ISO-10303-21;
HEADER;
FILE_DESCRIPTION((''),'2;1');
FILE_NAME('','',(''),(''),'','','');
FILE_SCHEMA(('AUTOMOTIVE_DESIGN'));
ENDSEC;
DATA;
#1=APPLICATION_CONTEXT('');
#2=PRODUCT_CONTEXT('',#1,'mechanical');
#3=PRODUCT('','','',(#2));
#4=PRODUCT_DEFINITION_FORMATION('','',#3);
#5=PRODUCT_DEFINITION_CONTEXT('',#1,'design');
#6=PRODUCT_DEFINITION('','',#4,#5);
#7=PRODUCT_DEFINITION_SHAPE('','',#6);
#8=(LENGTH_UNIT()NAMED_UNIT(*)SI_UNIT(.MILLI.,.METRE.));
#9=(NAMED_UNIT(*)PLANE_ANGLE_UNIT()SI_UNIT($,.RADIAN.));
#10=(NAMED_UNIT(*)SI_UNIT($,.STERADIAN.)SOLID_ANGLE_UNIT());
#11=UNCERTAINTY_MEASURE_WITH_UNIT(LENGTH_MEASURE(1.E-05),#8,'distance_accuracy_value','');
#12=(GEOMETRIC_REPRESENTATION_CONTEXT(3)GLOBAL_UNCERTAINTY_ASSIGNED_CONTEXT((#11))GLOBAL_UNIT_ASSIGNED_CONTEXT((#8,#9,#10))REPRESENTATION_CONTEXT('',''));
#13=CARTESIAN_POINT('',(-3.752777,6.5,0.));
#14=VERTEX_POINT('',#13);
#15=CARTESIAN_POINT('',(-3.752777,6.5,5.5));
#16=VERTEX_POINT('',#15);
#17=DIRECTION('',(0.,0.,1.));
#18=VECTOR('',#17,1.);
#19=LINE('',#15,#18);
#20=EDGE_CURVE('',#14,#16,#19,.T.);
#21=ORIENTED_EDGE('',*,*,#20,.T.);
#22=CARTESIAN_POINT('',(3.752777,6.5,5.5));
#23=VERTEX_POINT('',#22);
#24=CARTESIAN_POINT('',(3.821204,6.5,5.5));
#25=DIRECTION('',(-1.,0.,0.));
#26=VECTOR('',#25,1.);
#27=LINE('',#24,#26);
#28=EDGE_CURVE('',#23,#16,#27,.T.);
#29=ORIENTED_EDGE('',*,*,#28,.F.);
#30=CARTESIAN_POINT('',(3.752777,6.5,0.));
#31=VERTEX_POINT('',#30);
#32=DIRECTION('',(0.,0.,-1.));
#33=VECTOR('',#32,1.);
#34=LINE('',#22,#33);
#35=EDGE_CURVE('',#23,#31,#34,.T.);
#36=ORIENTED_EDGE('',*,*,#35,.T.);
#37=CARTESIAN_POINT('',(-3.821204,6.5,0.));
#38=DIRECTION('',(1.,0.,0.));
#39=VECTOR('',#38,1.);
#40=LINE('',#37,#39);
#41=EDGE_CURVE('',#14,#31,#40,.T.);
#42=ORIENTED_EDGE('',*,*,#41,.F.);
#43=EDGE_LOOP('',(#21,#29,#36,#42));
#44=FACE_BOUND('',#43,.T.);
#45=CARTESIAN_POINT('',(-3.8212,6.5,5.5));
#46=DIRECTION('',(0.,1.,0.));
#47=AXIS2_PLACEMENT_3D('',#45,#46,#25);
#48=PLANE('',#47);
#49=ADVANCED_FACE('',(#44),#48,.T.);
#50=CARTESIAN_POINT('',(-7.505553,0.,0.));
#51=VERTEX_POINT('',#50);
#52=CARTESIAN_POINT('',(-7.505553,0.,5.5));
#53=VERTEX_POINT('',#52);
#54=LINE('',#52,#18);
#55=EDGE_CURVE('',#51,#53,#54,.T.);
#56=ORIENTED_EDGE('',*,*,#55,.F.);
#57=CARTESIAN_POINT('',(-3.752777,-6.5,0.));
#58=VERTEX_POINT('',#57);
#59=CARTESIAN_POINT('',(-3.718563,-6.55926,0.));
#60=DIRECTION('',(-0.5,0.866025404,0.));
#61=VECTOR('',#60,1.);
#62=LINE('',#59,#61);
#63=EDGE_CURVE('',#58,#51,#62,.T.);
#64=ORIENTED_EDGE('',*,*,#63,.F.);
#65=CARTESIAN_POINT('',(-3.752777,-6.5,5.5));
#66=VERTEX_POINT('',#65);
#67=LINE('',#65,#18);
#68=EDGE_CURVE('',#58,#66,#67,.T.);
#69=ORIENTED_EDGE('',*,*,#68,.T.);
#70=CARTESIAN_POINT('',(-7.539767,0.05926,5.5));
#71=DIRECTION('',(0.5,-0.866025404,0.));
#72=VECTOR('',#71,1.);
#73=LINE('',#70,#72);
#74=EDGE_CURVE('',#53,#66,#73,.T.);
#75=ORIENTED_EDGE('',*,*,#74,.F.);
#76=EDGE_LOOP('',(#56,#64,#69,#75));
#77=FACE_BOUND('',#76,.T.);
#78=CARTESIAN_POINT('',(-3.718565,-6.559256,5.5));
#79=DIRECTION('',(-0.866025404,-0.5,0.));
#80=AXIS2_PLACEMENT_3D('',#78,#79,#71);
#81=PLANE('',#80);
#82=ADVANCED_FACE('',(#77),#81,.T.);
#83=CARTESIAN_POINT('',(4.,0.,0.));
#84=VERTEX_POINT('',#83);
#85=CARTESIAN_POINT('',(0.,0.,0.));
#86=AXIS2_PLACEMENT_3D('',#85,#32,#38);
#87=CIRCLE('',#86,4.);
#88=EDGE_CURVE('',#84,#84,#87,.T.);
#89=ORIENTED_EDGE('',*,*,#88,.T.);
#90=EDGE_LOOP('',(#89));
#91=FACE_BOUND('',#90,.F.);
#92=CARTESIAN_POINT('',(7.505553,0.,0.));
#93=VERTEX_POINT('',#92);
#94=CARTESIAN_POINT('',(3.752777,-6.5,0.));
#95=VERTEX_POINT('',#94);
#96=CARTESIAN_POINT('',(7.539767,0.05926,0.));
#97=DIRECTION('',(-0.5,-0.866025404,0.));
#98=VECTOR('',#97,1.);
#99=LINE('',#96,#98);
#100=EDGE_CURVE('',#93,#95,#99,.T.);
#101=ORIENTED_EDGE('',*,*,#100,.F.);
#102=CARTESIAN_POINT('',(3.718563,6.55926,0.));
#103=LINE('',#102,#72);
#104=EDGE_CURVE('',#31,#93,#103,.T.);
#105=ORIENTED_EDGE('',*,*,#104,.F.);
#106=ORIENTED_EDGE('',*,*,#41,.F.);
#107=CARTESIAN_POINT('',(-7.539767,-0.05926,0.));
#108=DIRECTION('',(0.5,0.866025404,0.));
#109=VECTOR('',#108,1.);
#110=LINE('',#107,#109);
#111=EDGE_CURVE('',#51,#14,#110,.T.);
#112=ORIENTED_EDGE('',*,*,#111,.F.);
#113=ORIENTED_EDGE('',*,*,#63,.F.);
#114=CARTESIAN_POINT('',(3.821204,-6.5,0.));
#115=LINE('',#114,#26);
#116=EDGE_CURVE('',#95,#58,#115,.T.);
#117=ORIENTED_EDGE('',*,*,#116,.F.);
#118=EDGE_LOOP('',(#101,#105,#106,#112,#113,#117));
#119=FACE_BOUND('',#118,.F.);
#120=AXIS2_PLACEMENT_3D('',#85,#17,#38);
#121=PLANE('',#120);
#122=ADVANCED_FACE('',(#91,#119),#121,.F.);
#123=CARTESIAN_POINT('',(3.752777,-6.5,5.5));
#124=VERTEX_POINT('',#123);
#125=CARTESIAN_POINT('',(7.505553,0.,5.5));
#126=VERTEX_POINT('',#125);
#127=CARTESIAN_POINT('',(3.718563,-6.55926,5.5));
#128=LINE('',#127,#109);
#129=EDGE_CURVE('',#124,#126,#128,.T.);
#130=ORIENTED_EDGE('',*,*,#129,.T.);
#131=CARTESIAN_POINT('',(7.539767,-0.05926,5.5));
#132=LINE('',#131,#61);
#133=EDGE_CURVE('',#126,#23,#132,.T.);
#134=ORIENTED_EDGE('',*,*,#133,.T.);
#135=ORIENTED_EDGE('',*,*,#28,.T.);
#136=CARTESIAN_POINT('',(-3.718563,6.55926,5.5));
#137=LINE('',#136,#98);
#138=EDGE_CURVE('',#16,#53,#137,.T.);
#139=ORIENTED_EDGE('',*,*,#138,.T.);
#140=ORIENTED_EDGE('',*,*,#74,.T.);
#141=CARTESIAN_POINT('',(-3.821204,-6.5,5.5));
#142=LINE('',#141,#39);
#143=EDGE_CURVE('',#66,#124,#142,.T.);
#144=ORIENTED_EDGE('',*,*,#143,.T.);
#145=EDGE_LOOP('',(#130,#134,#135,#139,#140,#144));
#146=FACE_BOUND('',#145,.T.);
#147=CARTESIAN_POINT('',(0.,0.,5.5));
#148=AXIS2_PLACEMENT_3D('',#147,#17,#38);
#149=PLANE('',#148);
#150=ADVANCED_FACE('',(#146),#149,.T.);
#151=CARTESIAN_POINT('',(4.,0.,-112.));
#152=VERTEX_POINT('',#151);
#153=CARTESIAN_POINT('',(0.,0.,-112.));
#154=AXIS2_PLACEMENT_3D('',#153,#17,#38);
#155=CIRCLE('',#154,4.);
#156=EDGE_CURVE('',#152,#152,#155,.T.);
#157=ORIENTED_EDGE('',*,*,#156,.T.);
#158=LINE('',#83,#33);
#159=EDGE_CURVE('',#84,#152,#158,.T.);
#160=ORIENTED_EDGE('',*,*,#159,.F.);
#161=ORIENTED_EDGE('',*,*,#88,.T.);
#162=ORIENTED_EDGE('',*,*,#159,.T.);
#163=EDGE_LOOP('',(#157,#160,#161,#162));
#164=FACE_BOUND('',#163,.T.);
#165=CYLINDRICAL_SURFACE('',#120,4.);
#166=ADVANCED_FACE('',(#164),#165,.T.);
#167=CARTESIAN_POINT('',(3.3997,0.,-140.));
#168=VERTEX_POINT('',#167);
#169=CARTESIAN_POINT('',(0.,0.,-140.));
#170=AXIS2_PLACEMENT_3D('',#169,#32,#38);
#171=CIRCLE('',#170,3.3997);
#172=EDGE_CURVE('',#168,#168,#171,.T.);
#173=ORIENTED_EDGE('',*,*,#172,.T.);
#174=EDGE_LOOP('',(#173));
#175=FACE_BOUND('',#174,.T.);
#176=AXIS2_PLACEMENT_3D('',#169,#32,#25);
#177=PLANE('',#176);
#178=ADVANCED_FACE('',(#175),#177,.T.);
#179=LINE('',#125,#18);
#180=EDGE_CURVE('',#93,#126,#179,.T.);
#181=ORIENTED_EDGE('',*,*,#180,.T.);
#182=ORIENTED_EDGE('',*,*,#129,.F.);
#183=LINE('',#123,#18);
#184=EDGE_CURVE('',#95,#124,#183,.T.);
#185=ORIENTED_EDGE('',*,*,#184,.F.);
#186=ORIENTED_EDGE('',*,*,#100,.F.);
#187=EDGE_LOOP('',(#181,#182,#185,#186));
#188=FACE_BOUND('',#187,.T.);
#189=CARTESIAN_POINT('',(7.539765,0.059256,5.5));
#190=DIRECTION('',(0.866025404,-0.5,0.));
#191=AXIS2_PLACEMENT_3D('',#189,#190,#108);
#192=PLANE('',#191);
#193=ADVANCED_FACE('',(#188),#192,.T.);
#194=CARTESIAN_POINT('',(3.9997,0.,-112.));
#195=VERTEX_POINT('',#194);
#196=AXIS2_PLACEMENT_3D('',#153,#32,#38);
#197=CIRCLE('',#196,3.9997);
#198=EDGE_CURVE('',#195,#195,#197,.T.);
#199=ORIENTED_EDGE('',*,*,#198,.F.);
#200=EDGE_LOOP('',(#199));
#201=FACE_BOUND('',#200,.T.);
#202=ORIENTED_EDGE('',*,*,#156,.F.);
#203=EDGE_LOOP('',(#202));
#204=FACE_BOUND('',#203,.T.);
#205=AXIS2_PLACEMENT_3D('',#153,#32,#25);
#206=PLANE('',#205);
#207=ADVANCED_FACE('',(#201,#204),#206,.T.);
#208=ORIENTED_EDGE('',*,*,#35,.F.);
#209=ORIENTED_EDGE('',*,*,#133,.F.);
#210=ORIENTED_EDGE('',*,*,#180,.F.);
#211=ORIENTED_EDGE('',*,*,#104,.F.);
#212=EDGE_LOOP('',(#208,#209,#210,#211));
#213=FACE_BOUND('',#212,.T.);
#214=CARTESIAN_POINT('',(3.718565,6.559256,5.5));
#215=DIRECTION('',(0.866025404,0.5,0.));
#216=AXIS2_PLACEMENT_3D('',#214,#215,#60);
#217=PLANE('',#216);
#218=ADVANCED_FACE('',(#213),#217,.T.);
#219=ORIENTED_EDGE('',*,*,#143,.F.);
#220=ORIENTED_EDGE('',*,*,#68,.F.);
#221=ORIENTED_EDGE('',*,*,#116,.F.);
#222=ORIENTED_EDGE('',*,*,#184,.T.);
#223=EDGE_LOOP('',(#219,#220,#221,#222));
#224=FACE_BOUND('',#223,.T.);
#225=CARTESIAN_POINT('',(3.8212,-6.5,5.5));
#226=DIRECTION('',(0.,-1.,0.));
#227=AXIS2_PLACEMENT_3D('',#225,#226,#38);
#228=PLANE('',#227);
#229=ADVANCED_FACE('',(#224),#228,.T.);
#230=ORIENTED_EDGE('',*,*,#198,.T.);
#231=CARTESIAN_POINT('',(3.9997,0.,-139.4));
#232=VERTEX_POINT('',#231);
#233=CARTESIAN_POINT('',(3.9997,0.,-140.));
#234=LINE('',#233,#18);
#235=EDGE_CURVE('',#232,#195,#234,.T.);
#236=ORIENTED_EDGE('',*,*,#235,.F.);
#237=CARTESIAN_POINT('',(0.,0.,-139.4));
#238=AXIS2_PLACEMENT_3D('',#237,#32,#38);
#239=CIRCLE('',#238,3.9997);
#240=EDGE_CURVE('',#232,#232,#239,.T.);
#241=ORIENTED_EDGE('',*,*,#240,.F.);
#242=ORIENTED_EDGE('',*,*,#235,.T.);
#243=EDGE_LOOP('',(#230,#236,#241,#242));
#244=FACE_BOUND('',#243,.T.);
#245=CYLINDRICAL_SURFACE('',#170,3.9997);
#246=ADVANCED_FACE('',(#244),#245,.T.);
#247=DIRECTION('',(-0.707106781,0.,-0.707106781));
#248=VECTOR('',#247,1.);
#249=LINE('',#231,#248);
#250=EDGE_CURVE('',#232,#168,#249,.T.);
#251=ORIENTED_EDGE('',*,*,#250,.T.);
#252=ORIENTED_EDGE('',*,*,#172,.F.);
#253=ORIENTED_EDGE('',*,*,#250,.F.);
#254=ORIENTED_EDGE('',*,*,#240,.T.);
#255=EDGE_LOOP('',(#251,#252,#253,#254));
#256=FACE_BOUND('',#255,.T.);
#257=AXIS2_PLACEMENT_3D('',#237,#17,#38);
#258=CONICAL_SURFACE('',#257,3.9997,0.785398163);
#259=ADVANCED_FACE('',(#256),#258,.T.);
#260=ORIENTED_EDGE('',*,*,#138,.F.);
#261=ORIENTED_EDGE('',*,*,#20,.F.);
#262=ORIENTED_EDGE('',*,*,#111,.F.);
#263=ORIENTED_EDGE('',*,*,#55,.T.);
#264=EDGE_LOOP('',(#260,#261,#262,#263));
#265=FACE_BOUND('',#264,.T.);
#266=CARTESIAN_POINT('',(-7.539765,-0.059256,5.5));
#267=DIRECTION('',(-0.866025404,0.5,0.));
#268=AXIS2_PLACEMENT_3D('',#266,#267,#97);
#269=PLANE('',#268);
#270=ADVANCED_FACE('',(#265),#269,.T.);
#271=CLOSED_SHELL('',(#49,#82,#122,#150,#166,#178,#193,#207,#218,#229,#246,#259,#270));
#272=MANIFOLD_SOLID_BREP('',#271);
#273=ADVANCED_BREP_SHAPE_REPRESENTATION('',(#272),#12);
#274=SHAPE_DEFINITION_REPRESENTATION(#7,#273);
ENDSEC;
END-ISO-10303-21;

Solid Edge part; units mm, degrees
sketch "Sketch1" plane through (0, 0, 0) normal (0, 0, 1) x (1, 0, 0)
  circle A0 centre (0, 0) radius 7.54
  dimension "D1" = 15.08
extrude "Protrusion1" add sketch "Sketch1" along normal blind 5.5
sketch "Sketch2" plane through (0, 0, 0) normal (0, 0, -1) x (1, 0, 0)
  circle A0 centre (0, 0) radius 4
extrude "Protrusion2" add sketch "Sketch2" along normal blind 140
sketch "Sketch3" plane through (0, 0, -140) normal (0, 0, -1) x (1, 0, 0)
  circle A0 centre (0, 0) radius 3.9997
extrude "Cutout1" cut sketch "Sketch3" against normal blind 28 flip side to cut
chamfer "Chamfer_1" distance 0.6 angle 45 1 edges at (-3.9997, 0, -140)
sketch "Sketch4" plane through (0, 0, 5.5) normal (0, 0, 1) x (1, 0, 0)
  line L0 (-3.8212, 6.5) -> (3.8212, 6.5)
  dimension "D1" = 13
extrude "Cutout2" cut sketch "Sketch4" against normal up to next material side at (0, 6.55, 5.5)
pattern_circular "Pattern1" count 6 over 360 about axis through (0, 0, 5.5) along (0, 0, 1) of "Cutout2"
properties part number "24104786"
